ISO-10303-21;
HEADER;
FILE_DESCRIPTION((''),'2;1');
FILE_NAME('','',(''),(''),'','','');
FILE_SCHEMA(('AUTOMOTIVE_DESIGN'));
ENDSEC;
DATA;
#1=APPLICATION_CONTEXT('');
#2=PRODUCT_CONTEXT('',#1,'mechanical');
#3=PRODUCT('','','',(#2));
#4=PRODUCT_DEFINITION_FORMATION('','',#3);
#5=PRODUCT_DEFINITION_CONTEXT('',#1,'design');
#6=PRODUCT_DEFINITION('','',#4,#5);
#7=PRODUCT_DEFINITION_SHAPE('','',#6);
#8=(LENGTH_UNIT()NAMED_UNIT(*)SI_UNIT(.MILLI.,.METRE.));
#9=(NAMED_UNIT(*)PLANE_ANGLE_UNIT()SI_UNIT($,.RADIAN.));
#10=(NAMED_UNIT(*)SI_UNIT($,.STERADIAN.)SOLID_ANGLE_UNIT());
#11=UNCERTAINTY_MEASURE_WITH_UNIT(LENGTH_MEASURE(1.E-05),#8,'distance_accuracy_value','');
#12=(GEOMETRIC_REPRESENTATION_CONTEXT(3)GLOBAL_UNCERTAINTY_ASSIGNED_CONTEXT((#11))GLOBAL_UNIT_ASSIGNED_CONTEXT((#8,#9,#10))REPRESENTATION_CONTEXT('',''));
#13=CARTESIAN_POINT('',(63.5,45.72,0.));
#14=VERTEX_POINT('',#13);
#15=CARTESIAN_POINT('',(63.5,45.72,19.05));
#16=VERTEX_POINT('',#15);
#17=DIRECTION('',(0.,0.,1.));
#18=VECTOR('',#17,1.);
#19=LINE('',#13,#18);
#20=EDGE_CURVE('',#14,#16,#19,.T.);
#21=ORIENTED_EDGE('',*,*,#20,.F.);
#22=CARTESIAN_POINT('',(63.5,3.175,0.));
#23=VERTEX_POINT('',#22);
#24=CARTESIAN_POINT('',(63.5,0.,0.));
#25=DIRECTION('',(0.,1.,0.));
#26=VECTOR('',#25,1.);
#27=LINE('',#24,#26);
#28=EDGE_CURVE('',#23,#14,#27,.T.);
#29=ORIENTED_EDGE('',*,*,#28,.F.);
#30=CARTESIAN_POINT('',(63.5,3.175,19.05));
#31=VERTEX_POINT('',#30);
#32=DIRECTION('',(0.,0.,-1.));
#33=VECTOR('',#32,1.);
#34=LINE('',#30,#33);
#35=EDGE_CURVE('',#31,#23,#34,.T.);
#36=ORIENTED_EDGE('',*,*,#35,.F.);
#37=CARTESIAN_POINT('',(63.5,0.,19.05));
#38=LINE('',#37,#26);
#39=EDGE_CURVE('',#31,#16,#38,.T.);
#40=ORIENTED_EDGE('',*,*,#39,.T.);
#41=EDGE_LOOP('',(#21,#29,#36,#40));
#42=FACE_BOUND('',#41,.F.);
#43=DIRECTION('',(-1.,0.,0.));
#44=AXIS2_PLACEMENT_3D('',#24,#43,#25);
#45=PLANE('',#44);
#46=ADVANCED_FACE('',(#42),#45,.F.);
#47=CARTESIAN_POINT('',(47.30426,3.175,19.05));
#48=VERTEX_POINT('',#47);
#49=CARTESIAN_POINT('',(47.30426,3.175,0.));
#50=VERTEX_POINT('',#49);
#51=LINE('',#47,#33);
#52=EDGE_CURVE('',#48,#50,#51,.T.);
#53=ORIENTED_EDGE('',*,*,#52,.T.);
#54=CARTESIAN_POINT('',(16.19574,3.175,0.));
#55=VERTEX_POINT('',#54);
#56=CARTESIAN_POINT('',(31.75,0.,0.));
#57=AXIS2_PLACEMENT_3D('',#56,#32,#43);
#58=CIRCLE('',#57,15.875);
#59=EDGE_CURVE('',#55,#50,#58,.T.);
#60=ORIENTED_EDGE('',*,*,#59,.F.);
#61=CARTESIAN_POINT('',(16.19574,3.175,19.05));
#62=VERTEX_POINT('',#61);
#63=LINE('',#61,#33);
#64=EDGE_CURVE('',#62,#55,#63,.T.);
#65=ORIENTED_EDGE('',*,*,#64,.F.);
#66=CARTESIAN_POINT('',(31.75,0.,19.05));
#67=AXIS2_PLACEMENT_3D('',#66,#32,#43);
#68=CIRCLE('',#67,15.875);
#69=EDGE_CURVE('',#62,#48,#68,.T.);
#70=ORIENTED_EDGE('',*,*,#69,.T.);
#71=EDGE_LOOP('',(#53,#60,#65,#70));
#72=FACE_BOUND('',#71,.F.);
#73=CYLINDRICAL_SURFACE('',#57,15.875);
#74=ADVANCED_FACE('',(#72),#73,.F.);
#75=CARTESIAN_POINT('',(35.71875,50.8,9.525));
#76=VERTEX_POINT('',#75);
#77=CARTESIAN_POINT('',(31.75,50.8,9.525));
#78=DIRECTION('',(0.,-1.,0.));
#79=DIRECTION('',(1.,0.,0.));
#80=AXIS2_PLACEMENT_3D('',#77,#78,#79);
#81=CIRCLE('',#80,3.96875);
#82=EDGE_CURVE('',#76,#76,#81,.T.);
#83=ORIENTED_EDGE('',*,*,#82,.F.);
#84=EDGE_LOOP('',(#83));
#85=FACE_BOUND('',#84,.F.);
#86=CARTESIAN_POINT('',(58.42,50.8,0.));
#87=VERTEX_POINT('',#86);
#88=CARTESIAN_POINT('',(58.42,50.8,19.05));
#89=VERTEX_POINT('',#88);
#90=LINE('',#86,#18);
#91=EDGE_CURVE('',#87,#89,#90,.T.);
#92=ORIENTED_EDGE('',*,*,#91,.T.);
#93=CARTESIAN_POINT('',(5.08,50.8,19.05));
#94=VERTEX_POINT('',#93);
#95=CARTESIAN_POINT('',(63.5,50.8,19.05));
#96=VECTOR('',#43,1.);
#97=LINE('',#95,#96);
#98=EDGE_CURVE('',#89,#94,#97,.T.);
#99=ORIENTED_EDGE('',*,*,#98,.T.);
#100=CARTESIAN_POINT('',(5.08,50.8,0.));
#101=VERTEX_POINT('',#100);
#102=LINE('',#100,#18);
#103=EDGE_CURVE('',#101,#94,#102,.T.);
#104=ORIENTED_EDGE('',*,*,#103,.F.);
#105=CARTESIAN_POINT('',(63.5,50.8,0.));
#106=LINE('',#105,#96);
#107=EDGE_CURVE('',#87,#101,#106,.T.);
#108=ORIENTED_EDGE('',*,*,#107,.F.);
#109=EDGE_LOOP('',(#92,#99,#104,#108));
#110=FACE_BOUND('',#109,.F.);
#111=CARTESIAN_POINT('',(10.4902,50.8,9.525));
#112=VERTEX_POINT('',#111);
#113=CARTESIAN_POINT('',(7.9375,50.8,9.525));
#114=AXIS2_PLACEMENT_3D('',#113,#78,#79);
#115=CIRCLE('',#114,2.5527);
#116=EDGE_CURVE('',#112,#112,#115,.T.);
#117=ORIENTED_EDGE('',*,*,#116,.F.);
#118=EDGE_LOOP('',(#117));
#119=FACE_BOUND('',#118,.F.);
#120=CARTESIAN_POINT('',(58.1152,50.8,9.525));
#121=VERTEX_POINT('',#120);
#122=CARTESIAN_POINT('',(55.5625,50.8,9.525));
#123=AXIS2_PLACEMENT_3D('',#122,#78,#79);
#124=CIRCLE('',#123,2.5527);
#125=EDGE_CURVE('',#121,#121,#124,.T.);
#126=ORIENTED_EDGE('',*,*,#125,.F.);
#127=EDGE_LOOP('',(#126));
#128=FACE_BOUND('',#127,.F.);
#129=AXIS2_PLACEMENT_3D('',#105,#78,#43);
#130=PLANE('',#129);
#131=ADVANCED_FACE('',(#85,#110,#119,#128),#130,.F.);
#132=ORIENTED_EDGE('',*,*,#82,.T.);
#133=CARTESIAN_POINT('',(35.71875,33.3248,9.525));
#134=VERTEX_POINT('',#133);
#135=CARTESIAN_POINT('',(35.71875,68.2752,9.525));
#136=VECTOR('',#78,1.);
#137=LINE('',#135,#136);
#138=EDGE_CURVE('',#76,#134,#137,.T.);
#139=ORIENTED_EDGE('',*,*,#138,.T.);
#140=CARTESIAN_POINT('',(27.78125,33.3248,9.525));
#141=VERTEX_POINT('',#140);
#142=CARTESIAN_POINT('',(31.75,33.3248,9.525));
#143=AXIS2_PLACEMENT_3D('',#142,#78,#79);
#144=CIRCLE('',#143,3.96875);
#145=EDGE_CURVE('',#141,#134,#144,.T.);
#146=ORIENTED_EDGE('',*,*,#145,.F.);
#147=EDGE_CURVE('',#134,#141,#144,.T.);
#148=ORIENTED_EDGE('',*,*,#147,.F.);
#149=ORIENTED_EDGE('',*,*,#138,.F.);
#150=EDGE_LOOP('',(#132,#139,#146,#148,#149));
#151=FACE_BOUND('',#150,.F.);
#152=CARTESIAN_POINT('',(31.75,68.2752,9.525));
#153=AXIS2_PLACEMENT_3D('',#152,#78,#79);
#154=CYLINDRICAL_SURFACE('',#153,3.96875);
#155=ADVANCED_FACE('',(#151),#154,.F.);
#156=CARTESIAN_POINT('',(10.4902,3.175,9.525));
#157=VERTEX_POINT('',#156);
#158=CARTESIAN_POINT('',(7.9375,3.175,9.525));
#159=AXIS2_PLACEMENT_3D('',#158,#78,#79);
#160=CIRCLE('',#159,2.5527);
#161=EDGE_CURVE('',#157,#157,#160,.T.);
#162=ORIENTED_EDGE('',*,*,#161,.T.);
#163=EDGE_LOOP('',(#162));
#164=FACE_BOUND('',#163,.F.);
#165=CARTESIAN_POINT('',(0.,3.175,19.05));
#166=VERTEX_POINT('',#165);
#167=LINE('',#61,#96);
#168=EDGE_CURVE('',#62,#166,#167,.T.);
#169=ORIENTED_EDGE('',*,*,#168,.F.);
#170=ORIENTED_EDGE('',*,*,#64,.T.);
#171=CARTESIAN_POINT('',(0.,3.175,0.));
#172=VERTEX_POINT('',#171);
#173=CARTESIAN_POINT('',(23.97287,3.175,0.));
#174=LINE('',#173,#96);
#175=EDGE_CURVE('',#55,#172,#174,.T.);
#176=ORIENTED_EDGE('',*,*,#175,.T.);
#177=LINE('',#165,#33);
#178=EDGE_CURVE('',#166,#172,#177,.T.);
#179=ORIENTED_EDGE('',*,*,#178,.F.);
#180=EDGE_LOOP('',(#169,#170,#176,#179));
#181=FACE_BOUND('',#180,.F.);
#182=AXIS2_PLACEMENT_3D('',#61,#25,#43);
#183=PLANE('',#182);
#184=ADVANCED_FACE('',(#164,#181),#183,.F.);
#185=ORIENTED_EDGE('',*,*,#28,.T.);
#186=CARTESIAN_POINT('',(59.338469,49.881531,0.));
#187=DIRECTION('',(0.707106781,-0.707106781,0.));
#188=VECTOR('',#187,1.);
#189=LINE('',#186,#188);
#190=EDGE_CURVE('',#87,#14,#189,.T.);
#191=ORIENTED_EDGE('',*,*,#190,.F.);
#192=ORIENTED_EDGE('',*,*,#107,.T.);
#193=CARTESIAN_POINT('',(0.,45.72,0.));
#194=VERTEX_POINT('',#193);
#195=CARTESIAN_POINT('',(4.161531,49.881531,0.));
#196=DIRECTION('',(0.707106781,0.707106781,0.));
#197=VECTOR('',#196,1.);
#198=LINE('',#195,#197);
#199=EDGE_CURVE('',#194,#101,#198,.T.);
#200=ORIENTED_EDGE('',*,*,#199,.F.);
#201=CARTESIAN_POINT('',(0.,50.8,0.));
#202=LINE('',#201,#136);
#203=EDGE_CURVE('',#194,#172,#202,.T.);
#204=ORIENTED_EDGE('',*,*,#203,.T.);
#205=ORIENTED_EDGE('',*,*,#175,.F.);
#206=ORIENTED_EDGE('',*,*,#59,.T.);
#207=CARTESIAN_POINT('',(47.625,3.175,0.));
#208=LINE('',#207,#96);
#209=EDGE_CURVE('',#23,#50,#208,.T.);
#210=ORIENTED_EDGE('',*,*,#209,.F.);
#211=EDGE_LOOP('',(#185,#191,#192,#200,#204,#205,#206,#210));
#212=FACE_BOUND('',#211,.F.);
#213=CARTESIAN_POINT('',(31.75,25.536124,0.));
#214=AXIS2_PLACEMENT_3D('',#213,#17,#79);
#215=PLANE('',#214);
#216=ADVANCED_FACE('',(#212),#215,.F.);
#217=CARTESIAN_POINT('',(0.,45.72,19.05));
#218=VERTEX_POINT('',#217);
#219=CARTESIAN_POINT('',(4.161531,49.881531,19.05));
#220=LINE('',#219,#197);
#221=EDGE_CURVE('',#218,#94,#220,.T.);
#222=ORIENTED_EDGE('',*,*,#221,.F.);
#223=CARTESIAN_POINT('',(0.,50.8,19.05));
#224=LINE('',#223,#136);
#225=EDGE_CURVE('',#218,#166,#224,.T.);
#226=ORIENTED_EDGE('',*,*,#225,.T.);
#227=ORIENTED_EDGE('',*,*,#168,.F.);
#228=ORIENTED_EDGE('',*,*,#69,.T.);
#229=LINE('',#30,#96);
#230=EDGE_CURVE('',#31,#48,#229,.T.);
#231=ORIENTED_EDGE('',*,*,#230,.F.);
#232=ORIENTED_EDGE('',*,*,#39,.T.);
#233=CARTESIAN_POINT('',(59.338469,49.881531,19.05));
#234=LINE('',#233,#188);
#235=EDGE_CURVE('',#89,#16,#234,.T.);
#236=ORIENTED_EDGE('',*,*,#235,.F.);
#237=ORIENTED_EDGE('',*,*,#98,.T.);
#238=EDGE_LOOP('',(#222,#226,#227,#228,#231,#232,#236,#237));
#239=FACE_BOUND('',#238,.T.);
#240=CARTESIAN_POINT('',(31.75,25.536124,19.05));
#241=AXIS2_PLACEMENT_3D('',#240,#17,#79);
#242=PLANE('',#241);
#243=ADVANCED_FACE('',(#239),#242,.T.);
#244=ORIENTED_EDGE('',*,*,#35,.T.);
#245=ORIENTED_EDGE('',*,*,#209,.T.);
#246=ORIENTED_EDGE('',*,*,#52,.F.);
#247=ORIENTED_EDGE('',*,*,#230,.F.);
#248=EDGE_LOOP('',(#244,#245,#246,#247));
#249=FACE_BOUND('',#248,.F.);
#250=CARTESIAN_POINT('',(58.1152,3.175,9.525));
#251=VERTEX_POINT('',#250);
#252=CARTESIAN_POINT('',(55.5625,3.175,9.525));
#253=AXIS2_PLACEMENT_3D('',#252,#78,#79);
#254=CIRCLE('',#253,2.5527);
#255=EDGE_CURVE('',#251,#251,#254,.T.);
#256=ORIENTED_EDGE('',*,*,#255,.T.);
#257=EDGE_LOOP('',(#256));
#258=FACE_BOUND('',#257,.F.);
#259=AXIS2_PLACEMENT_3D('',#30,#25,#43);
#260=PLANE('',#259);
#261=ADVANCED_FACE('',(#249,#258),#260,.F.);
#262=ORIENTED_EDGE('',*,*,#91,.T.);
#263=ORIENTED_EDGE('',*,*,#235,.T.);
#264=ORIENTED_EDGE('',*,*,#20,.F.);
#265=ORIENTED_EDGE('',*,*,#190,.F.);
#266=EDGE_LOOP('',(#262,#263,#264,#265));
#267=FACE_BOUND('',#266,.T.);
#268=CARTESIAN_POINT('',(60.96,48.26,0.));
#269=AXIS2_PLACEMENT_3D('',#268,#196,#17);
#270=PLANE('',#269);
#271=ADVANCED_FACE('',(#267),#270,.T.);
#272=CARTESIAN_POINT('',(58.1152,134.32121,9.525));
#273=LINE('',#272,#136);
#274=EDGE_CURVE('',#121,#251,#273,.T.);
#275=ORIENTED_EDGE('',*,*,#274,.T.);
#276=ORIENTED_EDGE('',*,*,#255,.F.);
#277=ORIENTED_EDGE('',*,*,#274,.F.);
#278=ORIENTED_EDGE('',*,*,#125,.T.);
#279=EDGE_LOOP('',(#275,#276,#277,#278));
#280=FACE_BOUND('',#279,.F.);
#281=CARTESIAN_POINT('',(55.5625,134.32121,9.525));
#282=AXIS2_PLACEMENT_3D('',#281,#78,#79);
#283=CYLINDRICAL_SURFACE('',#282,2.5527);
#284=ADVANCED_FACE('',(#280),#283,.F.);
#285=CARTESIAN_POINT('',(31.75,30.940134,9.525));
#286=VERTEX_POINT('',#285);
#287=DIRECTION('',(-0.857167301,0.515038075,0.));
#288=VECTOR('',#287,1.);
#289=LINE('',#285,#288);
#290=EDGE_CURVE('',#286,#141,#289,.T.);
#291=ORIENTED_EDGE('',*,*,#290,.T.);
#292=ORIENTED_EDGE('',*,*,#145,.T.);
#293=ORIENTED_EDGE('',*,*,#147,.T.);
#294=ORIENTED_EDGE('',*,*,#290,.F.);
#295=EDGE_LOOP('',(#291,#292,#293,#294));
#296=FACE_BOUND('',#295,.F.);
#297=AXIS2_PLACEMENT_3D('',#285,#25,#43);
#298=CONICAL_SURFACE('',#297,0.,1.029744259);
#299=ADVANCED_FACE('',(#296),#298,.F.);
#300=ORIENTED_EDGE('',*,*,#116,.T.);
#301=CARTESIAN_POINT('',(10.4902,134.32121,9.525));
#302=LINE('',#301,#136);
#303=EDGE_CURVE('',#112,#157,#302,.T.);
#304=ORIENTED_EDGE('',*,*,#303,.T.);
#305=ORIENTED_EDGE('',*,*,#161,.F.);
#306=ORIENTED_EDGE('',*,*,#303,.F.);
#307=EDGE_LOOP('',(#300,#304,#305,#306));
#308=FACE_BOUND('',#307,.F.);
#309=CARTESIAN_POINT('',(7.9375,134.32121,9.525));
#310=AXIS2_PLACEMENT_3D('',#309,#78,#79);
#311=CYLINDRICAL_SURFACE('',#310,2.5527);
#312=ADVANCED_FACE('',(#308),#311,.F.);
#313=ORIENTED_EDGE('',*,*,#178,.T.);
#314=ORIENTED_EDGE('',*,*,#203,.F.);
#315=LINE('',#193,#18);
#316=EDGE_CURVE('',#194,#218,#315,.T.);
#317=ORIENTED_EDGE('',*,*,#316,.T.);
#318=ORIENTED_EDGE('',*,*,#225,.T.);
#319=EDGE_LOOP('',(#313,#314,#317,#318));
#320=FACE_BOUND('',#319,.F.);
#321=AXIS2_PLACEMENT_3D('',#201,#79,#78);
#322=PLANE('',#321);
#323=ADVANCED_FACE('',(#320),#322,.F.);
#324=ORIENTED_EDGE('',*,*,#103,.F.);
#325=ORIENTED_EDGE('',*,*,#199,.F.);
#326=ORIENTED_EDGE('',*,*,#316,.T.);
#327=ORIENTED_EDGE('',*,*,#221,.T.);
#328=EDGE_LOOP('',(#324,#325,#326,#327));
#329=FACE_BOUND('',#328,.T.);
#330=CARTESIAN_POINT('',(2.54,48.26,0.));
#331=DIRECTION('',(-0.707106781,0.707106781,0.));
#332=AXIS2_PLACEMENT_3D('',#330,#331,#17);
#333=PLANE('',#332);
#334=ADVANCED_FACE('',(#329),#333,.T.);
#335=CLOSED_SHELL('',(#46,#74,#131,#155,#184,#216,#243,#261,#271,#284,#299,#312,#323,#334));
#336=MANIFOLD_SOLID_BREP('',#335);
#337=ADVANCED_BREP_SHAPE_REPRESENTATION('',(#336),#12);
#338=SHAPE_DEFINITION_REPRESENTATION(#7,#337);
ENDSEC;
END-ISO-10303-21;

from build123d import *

# Parameters (mm, degrees)
F1_DEPTH = 19.05
F3_D     = 5.1054
F4_SIZE  = 5.08
F6_DEPTH = 25.4
F8_D     = 7.9375
F8_DEPTH = 17.4752
F8_TIP   = 2.3846655818


with BuildPart() as f1:
    # F0 (on Top) → F1 (new body)
    with BuildSketch(Plane.XY):
        with BuildLine():
            Line((0, 50.8), (0, 0))
            Line((0, 0), (15.875, 0))
            ThreePointArc((15.875, 0), (31.75, 15.875), (47.625, 0))
            Line((47.625, 0), (63.5, 0))
            Line((63.5, 0), (63.5, 50.8))
            Line((63.5, 50.8), (0, 50.8))
        make_face()
    extrude(amount=F1_DEPTH)

    # F3 (through all)
    with Locations(Plane(origin=(0, 50.8, 0), x_dir=(-1, 0, 0), z_dir=(0, 1, 0))):
        with Locations((-55.5625, 9.525), (-7.9375, 9.525)):
            Hole(F3_D / 2)

    # F4
    f4_edges = [f1.edges().sort_by_distance(p)[0] for p in [
        (63.5, 50.8, 9.525),
        (0, 50.8, 9.525),
    ]]
    chamfer(f4_edges, length=F4_SIZE)

    # F5 (on face) → F6 (cut)
    with BuildSketch(Plane.XY.offset(19.05)):
        with BuildLine():
            Line((0, 3.175), (0, 0))
            Line((0, 0), (15.875, 0))
            ThreePointArc((15.875, 0), (15.955388571, 1.5955797718), (16.1957401333, 3.175))
            Line((16.1957401333, 3.175), (0, 3.175))
        make_face()
        with BuildLine():
            ThreePointArc((47.3042598667, 3.175), (47.544611429, 1.5955797718), (47.625, 0))
            Line((47.625, 0), (63.5, 0))
            Line((63.5, 0), (63.5, 3.175))
            Line((63.5, 3.175), (47.3042598667, 3.175))
        make_face()
    extrude(amount=-F6_DEPTH, mode=Mode.SUBTRACT)

    # F8
    with Locations(Plane(origin=(0, 50.8, 0), x_dir=(-1, 0, 0), z_dir=(0, 1, 0))):
        with Locations((-31.75, 9.525)):
            Hole(F8_D / 2, depth=F8_DEPTH)
            with Locations((0, 0, -(F8_DEPTH + F8_TIP / 2))):  # 118° drill point
                Cone(0, F8_D / 2, F8_TIP, mode=Mode.SUBTRACT)


solid = f1.part
